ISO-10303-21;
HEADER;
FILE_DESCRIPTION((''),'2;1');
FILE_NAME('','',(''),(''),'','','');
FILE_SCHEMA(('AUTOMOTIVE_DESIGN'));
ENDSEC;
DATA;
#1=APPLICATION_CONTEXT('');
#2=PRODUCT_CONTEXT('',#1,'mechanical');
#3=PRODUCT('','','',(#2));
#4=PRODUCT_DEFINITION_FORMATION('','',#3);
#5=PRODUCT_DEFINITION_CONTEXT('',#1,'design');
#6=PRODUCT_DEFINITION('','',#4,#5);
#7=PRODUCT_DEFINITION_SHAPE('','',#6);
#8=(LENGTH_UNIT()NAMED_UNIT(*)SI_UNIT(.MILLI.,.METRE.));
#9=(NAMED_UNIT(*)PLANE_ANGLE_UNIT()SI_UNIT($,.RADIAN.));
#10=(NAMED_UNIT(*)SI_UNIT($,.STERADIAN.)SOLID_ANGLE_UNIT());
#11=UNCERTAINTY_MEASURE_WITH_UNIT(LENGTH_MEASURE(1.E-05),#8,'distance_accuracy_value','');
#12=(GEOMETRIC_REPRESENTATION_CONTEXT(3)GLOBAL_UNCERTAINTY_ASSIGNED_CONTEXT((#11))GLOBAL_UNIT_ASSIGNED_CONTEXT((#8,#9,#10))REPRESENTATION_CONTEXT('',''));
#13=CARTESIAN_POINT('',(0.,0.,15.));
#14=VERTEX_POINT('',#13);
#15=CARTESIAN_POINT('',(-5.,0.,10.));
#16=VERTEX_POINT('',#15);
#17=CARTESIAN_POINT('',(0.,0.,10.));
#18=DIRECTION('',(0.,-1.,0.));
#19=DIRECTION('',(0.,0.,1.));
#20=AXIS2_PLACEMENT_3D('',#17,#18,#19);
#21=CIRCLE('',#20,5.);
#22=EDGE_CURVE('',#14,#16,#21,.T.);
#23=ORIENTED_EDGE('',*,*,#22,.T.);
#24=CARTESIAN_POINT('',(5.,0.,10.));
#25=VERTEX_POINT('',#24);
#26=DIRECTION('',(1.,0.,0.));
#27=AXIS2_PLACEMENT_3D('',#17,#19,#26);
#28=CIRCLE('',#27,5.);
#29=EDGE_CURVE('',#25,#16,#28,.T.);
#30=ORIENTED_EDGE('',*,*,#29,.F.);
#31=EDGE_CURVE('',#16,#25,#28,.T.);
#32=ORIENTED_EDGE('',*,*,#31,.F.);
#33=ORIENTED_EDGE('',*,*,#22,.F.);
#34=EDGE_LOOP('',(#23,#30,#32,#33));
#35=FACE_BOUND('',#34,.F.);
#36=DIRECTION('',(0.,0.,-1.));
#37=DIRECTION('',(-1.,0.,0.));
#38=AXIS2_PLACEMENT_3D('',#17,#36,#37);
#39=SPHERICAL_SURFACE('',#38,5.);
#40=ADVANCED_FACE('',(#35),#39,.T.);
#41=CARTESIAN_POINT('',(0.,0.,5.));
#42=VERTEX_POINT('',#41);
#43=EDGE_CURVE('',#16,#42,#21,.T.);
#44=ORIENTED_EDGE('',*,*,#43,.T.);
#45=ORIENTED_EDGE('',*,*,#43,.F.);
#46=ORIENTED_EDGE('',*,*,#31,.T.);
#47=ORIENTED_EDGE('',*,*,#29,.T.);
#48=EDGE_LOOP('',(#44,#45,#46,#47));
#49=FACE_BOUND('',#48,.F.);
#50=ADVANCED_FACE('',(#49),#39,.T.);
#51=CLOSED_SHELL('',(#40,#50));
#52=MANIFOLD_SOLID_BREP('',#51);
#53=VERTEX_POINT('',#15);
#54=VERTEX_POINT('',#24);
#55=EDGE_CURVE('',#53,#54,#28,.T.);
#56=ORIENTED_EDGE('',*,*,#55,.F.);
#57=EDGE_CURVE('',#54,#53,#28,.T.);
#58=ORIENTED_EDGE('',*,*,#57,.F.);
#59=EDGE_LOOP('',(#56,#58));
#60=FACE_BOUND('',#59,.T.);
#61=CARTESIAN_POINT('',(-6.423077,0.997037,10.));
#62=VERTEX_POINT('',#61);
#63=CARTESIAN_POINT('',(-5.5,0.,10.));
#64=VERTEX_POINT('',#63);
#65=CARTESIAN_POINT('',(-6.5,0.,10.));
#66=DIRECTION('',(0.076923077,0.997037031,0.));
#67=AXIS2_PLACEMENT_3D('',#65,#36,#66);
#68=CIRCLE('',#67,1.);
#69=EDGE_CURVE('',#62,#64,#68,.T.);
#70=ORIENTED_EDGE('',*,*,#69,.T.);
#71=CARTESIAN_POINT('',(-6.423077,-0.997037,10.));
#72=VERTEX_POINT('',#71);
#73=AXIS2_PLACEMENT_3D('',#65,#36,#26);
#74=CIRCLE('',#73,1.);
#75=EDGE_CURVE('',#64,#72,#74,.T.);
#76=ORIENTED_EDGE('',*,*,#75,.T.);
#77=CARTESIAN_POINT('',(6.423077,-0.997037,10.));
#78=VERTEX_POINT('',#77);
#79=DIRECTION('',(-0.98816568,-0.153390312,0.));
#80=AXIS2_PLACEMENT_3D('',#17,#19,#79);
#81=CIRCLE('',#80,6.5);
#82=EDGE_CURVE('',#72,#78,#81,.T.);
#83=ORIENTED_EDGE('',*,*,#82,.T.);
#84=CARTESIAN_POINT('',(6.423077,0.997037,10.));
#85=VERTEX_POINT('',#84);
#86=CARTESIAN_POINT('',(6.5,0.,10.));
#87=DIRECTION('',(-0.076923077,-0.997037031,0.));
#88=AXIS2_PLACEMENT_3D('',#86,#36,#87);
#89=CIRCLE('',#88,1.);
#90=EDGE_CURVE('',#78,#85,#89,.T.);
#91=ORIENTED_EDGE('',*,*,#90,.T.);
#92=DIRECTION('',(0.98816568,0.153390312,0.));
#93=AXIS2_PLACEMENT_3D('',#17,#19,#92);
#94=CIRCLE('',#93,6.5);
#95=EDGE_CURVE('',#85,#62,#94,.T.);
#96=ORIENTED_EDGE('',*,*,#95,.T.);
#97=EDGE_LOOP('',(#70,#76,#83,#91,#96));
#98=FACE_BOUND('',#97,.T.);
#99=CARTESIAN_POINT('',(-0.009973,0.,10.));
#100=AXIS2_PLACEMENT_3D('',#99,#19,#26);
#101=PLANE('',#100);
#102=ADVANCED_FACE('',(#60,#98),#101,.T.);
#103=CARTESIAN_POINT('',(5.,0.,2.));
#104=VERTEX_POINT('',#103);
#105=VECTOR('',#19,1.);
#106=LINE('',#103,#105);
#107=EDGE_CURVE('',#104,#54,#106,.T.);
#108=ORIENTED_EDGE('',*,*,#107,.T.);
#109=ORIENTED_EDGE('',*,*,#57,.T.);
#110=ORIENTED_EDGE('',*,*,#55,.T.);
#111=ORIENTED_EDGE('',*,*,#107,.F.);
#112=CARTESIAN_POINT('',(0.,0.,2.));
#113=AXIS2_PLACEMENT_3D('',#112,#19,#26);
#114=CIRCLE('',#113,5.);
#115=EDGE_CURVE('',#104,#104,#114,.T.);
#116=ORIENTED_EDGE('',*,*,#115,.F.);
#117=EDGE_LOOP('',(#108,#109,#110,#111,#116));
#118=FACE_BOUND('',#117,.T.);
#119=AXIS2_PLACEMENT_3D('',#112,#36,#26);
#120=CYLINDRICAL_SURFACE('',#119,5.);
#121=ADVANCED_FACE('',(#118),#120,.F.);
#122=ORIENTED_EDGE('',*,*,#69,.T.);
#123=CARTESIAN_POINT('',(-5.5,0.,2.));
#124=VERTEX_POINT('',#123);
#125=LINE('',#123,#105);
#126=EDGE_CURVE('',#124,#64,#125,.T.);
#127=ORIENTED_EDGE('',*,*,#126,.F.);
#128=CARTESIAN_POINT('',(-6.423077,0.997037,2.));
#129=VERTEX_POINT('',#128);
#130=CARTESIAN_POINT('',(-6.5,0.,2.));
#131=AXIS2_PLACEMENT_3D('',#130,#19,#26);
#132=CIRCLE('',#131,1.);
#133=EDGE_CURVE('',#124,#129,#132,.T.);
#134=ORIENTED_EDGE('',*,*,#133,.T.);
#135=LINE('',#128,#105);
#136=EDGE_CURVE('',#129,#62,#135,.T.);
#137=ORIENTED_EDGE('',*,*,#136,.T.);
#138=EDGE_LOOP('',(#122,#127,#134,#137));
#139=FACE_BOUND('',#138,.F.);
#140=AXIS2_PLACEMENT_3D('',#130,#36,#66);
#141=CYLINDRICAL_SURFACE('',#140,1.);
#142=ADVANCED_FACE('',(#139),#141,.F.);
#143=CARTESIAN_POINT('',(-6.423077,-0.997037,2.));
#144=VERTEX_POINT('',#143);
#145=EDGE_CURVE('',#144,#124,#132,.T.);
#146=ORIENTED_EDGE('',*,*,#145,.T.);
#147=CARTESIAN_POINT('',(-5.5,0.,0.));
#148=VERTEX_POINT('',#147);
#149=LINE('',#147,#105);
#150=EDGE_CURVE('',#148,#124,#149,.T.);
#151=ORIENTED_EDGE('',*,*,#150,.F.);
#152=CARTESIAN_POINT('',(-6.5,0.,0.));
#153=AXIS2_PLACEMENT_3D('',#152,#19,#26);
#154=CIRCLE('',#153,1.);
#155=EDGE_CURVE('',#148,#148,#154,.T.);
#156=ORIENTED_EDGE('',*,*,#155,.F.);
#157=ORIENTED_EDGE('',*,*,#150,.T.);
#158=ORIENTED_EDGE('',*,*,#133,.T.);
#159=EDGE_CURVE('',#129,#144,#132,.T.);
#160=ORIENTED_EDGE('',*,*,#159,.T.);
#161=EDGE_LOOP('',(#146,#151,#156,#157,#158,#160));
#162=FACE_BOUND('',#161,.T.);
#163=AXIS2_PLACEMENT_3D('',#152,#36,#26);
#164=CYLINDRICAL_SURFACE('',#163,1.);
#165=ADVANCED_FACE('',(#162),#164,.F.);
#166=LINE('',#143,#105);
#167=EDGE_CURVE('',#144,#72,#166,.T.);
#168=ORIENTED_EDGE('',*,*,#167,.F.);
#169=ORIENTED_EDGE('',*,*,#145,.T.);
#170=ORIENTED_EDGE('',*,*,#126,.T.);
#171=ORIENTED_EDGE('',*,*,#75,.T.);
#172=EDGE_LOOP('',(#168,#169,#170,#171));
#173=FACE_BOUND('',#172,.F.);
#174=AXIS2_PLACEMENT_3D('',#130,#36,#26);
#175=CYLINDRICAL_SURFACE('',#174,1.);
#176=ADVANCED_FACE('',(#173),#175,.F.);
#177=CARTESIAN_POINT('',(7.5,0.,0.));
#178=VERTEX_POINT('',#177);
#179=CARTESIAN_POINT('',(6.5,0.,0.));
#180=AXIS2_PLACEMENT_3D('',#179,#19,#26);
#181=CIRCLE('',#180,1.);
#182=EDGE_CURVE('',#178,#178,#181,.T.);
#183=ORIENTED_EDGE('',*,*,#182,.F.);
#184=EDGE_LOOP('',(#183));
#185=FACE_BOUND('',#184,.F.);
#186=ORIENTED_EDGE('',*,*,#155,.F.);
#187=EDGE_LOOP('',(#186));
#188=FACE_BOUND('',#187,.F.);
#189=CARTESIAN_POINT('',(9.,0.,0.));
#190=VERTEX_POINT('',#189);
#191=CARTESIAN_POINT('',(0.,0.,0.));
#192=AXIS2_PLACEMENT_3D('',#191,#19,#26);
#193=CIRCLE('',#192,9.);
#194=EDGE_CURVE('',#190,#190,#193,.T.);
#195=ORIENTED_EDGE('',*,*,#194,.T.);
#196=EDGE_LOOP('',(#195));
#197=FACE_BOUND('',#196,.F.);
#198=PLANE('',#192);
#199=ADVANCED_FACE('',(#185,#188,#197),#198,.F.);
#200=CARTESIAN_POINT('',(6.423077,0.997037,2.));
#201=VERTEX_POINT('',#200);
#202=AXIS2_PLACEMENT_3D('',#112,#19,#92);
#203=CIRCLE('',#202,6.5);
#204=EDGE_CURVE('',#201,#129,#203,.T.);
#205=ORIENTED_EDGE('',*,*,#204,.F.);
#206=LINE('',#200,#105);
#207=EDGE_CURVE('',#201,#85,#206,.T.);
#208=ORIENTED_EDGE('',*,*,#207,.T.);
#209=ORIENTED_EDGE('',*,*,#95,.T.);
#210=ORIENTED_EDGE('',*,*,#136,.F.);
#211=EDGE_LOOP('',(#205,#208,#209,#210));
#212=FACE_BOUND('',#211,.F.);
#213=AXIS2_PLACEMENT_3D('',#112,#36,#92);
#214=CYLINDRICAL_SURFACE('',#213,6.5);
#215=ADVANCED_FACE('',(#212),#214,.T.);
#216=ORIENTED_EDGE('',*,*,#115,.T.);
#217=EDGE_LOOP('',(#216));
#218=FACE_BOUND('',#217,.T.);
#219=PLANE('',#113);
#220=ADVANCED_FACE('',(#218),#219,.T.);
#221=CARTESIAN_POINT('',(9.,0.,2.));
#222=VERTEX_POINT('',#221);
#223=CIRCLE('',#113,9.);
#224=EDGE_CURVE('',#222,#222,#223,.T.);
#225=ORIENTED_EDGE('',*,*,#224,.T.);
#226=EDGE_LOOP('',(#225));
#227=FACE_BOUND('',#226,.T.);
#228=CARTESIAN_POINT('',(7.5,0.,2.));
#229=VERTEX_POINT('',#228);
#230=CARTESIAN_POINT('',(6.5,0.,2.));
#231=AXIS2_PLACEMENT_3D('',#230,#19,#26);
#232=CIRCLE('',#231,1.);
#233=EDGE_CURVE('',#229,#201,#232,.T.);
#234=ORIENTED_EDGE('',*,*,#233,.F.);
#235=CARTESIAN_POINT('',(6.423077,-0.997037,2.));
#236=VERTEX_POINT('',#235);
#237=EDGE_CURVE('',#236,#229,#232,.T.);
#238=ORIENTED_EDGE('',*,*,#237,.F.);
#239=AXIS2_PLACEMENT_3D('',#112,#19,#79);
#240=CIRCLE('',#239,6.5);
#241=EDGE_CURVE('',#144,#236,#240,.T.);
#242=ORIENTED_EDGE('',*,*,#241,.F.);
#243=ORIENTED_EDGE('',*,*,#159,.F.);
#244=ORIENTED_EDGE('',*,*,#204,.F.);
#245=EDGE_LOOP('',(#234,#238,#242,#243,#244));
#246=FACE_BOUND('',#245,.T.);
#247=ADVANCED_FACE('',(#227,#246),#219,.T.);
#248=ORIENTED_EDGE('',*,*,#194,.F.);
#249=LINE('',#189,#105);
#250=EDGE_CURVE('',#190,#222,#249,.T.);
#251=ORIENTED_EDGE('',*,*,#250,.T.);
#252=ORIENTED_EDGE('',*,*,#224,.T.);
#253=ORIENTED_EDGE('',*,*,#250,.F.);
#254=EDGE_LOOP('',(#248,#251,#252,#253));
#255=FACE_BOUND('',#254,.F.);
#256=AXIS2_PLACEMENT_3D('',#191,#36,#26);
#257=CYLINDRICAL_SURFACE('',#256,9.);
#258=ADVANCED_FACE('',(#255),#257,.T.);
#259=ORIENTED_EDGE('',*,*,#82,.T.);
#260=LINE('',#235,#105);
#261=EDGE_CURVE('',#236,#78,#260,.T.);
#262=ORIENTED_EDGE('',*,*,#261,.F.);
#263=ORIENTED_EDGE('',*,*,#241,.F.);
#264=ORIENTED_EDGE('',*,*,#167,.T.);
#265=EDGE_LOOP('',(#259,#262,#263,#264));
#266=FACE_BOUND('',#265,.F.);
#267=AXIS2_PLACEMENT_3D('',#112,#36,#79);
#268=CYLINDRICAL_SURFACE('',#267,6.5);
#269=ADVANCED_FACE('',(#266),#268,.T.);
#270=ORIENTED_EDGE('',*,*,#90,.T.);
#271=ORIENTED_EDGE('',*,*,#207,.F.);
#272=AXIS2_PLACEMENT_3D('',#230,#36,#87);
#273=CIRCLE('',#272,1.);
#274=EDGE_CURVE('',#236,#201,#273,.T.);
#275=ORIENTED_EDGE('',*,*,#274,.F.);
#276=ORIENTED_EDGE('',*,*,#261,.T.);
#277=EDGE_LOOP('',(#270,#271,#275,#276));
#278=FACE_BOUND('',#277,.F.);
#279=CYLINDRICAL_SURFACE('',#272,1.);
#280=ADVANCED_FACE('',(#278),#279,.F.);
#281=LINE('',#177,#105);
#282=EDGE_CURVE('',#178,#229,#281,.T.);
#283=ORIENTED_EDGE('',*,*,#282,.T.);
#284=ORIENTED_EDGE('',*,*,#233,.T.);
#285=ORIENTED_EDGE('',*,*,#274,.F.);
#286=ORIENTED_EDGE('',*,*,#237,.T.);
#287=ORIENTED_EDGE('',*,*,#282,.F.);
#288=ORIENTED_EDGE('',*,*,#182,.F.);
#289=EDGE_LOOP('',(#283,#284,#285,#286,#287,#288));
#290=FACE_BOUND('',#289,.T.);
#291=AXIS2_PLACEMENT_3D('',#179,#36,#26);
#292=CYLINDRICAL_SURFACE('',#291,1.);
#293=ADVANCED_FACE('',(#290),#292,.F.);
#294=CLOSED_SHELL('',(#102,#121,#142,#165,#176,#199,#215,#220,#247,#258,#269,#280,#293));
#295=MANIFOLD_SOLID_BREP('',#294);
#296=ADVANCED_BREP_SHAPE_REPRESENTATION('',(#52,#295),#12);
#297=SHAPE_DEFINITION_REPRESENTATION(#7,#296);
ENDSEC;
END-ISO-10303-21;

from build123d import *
from build123d import SkipClean  # not in build123d's __all__

# Parameters (mm, degrees)
F2_R     = 9
F2_R_2   = 1
F3_DEPTH = 2
F6_R     = 5
F7_DEPTH = 8


with BuildPart() as f3:
    # F2 (on Top) → F3 (new body)
    with BuildSketch(Plane.XY):
        Circle(F2_R)
        with Locations((-6.5, 0)):
            Circle(F2_R_2, mode=Mode.SUBTRACT)
        with Locations((6.5, 0)):
            Circle(F2_R_2, mode=Mode.SUBTRACT)
    extrude(amount=F3_DEPTH)



with BuildPart() as f5:
    # F4 (on Front) → F5 (revolve)
    with BuildSketch(Plane.XZ):
        with BuildLine():
            Line((0, 5), (0, 15))
            ThreePointArc((0, 15), (-5, 10), (0, 5))
        make_face()
    revolve(axis=Axis((0, 0, 8.2231094215), (0, 0, 1)))


with BuildPart() as f3_1:
    add(f3.part, clean=False)

    with SkipClean():  # cleaning this boolean's faces spoils the solid; the shape is the same uncleaned
        add(f5.part)  # F7 merges F5
    # F6 (on face) → F7 (join)
    with BuildSketch(Plane.XY.offset(2)):
        with BuildLine():
            ThreePointArc((6.4230769231, -0.9970370305), (5.5, 0), (6.4230769231, 0.9970370305))
            ThreePointArc((6.4230769231, 0.9970370305), (0, 6.5), (-6.4230769231, 0.9970370305))
            ThreePointArc((-6.4230769231, 0.9970370305), (-5.7662006143, 0.6793662205), (-5.5, 0))
            ThreePointArc((-5.5, 0), (-5.7662006143, -0.6793662205), (-6.4230769231, -0.9970370305))
            ThreePointArc((-6.4230769231, -0.9970370305), (0, -6.5), (6.4230769231, -0.9970370305))
        make_face()
        Circle(F6_R, mode=Mode.SUBTRACT)
    with SkipClean():  # cleaning this boolean's faces spoils the solid; the shape is the same uncleaned
        extrude(amount=F7_DEPTH)


solid = f3_1.part
